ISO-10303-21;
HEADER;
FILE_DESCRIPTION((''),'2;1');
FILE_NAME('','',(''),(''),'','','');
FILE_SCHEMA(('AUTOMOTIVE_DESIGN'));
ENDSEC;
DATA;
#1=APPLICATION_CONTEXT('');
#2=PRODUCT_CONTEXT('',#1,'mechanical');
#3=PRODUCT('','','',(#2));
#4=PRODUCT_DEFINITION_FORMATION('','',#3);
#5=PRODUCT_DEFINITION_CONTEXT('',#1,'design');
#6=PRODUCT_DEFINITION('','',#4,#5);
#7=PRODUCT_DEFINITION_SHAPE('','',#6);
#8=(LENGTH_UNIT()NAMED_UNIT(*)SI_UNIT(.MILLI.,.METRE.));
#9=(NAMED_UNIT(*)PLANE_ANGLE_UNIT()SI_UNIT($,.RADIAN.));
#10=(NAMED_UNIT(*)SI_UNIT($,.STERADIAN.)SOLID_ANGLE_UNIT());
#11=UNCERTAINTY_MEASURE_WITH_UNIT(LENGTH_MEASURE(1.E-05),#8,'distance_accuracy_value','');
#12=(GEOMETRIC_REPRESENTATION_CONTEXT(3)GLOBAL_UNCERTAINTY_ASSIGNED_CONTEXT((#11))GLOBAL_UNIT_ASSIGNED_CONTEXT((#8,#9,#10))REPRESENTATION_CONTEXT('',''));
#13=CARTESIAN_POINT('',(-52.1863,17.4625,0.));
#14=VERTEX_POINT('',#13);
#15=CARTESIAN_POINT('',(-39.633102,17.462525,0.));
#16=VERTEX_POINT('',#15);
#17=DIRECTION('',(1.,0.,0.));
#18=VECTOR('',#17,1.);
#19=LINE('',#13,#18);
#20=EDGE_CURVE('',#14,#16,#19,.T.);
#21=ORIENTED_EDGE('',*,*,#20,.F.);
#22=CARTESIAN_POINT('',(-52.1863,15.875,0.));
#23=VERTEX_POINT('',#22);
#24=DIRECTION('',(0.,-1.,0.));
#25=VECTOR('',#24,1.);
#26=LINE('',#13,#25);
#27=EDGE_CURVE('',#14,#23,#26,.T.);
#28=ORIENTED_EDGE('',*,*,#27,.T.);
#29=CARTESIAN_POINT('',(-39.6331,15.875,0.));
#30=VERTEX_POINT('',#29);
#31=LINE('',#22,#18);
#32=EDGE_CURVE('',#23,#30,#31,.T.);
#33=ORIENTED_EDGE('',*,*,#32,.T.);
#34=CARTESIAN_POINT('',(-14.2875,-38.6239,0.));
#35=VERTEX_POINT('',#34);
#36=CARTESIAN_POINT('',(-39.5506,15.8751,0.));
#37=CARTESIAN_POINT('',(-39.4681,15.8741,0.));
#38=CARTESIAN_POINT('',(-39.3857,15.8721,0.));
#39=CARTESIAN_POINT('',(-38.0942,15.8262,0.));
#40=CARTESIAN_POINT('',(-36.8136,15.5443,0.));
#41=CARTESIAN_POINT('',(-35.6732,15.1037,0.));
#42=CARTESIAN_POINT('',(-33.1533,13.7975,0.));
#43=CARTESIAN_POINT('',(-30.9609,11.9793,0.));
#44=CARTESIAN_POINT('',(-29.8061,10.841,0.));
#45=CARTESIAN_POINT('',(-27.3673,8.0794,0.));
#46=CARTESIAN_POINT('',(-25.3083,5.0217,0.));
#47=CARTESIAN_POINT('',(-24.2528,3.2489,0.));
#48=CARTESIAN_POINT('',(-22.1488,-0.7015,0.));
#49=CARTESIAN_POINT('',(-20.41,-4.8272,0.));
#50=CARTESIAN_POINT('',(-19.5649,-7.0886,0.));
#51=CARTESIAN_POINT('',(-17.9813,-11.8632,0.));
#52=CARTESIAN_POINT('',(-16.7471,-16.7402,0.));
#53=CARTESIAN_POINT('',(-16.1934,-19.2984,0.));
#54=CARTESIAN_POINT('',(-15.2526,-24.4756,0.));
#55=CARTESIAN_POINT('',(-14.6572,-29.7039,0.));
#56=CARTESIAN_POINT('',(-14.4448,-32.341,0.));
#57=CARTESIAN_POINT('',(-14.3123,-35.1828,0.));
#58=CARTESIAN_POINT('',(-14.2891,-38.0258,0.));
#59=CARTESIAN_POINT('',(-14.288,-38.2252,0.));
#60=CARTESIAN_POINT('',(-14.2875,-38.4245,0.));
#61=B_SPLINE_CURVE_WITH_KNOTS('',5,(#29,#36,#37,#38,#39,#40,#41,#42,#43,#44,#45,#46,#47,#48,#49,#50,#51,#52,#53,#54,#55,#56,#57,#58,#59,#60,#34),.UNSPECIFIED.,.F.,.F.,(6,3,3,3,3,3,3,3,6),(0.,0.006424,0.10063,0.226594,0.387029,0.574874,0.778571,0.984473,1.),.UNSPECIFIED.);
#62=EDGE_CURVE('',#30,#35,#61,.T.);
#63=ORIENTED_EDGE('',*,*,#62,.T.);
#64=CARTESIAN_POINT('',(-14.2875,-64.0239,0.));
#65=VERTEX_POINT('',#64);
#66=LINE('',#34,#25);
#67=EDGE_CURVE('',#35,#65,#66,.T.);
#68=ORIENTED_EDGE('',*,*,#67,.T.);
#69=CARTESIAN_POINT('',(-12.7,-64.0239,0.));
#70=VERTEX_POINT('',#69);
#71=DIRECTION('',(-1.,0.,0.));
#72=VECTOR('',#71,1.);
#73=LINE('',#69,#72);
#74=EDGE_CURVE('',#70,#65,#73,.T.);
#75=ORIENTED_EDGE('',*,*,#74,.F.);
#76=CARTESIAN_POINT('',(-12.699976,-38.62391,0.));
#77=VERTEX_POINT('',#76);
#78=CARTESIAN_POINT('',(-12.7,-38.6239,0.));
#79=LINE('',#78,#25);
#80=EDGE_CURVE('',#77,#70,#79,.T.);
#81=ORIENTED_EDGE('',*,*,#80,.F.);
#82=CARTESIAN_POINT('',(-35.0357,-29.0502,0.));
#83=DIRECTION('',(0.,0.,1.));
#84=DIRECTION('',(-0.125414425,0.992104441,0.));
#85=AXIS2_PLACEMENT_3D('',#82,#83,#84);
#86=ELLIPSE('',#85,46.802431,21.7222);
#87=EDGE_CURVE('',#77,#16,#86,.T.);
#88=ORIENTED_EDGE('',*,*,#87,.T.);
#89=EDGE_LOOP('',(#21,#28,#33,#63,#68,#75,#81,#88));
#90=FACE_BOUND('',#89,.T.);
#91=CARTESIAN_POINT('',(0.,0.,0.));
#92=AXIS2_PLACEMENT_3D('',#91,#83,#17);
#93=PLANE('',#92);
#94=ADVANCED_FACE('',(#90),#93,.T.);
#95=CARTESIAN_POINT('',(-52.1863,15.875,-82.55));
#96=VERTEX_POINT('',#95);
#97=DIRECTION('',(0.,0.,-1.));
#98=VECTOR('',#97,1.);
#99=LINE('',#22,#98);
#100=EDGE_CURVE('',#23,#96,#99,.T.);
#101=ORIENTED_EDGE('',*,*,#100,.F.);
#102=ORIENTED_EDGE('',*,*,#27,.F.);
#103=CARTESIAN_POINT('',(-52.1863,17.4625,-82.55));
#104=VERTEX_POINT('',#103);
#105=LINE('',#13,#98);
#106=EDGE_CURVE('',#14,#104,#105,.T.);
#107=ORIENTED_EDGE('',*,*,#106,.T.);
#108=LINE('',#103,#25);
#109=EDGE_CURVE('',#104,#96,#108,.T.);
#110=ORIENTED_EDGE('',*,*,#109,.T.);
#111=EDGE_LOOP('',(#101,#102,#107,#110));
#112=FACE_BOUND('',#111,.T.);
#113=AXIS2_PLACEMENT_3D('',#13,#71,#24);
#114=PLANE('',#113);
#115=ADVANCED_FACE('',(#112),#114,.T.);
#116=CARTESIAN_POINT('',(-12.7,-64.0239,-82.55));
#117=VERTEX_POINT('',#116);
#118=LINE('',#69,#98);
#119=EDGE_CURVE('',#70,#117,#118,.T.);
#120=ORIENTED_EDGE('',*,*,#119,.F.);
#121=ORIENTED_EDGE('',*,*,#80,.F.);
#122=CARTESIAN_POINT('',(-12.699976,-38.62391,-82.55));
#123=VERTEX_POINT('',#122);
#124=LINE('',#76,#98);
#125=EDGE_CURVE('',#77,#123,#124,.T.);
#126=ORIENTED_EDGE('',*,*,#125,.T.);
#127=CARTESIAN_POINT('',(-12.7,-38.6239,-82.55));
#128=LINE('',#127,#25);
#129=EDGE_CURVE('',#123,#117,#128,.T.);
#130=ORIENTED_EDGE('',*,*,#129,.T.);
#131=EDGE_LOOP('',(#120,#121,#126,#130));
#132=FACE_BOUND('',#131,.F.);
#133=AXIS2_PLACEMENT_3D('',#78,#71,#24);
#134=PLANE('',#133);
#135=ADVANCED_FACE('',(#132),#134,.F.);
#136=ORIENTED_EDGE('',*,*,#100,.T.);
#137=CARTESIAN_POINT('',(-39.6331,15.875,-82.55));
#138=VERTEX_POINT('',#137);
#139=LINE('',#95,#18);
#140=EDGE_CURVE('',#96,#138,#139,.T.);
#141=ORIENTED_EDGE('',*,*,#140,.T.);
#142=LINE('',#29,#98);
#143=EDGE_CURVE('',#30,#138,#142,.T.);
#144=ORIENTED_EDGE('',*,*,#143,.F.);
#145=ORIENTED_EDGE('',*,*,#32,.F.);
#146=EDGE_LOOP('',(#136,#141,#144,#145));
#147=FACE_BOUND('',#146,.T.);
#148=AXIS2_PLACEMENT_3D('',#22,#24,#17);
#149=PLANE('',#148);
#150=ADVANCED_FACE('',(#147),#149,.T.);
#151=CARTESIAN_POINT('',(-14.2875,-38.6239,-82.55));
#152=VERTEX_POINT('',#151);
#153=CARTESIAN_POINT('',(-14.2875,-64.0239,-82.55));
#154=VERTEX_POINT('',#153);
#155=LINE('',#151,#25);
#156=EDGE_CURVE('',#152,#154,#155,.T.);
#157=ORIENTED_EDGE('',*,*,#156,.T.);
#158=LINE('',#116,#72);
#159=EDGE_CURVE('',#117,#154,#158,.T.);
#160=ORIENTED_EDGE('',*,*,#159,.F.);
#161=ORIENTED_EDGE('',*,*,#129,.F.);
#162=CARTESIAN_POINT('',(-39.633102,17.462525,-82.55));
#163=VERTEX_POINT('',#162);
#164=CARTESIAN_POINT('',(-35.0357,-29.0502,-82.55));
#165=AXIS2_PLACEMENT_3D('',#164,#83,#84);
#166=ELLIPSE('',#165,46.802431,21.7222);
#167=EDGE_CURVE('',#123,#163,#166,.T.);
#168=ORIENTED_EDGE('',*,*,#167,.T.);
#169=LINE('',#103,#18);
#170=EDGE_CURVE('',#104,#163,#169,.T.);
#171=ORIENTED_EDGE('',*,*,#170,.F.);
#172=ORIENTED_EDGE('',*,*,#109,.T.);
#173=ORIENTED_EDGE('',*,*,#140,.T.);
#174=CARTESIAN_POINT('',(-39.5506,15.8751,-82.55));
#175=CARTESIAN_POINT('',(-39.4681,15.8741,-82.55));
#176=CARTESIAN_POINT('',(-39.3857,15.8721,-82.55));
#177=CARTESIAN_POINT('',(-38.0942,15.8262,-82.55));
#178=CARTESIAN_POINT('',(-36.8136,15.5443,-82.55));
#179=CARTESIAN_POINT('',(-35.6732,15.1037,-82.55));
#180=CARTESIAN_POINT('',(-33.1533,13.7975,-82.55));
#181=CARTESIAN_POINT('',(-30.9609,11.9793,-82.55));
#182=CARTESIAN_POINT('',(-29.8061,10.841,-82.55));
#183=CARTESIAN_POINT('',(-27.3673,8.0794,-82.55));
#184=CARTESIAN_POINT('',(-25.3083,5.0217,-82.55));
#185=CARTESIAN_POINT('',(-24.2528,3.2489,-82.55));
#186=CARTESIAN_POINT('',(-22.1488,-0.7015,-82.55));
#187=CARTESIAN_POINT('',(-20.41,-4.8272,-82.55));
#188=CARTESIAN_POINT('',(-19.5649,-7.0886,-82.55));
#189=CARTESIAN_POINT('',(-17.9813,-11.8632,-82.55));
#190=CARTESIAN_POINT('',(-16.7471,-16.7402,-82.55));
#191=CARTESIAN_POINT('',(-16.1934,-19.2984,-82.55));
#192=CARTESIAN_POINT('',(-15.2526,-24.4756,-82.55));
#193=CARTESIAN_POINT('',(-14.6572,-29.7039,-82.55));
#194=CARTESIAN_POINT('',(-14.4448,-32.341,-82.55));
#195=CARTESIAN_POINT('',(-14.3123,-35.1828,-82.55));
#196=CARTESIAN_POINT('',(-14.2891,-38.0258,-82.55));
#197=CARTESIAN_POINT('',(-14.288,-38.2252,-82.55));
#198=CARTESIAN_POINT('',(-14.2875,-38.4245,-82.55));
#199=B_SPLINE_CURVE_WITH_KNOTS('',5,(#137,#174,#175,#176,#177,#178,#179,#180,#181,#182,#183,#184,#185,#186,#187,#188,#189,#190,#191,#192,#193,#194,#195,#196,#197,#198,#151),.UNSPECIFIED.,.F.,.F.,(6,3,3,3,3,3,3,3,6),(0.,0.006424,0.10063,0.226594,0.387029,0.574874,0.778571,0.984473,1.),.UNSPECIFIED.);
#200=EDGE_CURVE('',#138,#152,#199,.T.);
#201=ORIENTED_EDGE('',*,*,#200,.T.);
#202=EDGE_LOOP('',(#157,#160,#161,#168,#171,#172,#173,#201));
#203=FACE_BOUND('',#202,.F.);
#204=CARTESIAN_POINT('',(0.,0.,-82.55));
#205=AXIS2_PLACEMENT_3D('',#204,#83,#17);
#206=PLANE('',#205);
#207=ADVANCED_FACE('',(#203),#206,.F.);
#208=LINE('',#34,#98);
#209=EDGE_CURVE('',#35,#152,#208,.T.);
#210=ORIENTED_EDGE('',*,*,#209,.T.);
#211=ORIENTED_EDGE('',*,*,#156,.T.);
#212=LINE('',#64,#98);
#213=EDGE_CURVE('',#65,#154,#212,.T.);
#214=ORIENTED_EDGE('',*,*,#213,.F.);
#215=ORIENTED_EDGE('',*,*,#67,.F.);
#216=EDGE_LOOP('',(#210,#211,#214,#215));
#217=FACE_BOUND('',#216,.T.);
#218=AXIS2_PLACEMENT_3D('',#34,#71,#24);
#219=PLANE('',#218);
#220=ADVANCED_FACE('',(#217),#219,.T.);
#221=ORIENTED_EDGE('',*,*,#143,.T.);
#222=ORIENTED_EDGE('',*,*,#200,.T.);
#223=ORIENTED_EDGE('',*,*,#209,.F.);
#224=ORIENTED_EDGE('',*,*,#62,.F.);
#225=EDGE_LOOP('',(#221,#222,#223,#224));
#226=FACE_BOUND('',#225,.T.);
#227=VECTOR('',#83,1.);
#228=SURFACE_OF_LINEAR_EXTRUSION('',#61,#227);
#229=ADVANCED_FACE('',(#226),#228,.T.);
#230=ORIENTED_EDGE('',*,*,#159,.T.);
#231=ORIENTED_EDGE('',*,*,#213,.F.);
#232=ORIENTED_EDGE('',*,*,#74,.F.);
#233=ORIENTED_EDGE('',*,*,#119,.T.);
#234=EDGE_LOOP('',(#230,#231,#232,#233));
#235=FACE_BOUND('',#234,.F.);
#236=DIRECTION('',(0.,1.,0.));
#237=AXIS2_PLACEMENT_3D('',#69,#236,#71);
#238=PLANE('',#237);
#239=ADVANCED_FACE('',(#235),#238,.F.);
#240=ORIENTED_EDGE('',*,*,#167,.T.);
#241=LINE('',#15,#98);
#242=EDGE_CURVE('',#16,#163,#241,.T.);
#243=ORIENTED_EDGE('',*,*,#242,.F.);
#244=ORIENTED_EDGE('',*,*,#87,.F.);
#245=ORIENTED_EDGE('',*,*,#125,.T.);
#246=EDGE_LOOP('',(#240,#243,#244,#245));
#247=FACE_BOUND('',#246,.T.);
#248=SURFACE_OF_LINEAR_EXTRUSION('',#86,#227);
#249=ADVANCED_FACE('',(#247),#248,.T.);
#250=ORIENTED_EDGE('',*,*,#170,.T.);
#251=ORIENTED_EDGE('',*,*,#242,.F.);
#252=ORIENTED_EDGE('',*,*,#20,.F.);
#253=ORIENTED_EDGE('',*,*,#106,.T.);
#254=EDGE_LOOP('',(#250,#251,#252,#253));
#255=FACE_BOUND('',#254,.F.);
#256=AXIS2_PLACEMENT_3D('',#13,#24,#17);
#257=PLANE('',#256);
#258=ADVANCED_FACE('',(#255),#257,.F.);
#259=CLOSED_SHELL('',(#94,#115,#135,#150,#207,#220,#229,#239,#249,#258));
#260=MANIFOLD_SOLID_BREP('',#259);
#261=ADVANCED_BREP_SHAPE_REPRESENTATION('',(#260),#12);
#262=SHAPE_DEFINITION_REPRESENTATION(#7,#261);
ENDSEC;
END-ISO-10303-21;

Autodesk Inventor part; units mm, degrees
ref_plane "YZ Plane" through (0, 0, 0) normal (1, 0, 0) x (0, 1, 0)
ref_plane "XZ Plane" through (0, 0, 0) normal (0, 1, 0) x (-1, 0, 0)
ref_plane "XY Plane" through (0, 0, 0) normal (0, 0, 1) x (1, 0, 0)
sketch "Sketch1" plane through (0, 0, 0) normal (0, 0, 1) x (1, 0, 0)
  line L0 (-52.1863, 17.4625) -> (-39.6331, 17.4625)
  ellipse E0 centre (-35.0357, -29.0502) end of major axis (-40.9054, 17.3827) minor radius 21.7222 (-12.7, -38.6239) -> (-39.6331, 17.4625) ccw
  line L1 (-12.7, -38.6239) -> (-12.7, -64.0239)
  line L2 (-52.1863, 15.875) -> (-39.6331, 15.875)
  line L3 (-14.2875, -38.6239) -> (-14.2875, -64.0239)
  line L4 (-52.1863, 17.4625) -> (-52.1863, 15.875)
  line L5 (-12.7, -64.0239) -> (-14.2875, -64.0239)
  spline S0 degree 5 poles (-39.6331, 15.8751) (-39.5506, 15.8751) (-39.4681, 15.8741) (-39.3857, 15.8721) (-38.0942, 15.8262) (-36.8136, 15.5443) (-35.6732, 15.1037) (-33.1533, 13.7975) (-30.9609, 11.9793) (-29.8061, 10.841) (-27.3673, 8.0794) (-25.3083, 5.0217) (-24.2528, 3.2489) (-22.1488, -0.7015) (-20.41, -4.8272) (-19.5649, -7.0886) (-17.9813, -11.8632) (-16.7471, -16.7402) (-16.1934, -19.2984) (-15.2526, -24.4756) (-14.6572, -29.7039) (-14.4448, -32.341) (-14.3123, -35.1828) (-14.2891, -38.0258) (-14.288, -38.2252) (-14.2875, -38.4245) (-14.2875, -38.6239) knots 0 0 0 0 0 0 0.006424 0.006424 0.006424 0.10063 0.10063 0.10063 0.226594 0.226594 0.226594 0.387029 0.387029 0.387029 0.574874 0.574874 0.574874 0.778571 0.778571 0.778571 0.984473 0.984473 0.984473 1 1 1 1 1 1
  point P0 (0, 0)
  dimension "d2" = 1.5875
  dimension "d1" = 25.4
extrude "Extrusion1" add sketch "Sketch1" against normal blind 82.55
properties part number "Intake hood polycarb"
